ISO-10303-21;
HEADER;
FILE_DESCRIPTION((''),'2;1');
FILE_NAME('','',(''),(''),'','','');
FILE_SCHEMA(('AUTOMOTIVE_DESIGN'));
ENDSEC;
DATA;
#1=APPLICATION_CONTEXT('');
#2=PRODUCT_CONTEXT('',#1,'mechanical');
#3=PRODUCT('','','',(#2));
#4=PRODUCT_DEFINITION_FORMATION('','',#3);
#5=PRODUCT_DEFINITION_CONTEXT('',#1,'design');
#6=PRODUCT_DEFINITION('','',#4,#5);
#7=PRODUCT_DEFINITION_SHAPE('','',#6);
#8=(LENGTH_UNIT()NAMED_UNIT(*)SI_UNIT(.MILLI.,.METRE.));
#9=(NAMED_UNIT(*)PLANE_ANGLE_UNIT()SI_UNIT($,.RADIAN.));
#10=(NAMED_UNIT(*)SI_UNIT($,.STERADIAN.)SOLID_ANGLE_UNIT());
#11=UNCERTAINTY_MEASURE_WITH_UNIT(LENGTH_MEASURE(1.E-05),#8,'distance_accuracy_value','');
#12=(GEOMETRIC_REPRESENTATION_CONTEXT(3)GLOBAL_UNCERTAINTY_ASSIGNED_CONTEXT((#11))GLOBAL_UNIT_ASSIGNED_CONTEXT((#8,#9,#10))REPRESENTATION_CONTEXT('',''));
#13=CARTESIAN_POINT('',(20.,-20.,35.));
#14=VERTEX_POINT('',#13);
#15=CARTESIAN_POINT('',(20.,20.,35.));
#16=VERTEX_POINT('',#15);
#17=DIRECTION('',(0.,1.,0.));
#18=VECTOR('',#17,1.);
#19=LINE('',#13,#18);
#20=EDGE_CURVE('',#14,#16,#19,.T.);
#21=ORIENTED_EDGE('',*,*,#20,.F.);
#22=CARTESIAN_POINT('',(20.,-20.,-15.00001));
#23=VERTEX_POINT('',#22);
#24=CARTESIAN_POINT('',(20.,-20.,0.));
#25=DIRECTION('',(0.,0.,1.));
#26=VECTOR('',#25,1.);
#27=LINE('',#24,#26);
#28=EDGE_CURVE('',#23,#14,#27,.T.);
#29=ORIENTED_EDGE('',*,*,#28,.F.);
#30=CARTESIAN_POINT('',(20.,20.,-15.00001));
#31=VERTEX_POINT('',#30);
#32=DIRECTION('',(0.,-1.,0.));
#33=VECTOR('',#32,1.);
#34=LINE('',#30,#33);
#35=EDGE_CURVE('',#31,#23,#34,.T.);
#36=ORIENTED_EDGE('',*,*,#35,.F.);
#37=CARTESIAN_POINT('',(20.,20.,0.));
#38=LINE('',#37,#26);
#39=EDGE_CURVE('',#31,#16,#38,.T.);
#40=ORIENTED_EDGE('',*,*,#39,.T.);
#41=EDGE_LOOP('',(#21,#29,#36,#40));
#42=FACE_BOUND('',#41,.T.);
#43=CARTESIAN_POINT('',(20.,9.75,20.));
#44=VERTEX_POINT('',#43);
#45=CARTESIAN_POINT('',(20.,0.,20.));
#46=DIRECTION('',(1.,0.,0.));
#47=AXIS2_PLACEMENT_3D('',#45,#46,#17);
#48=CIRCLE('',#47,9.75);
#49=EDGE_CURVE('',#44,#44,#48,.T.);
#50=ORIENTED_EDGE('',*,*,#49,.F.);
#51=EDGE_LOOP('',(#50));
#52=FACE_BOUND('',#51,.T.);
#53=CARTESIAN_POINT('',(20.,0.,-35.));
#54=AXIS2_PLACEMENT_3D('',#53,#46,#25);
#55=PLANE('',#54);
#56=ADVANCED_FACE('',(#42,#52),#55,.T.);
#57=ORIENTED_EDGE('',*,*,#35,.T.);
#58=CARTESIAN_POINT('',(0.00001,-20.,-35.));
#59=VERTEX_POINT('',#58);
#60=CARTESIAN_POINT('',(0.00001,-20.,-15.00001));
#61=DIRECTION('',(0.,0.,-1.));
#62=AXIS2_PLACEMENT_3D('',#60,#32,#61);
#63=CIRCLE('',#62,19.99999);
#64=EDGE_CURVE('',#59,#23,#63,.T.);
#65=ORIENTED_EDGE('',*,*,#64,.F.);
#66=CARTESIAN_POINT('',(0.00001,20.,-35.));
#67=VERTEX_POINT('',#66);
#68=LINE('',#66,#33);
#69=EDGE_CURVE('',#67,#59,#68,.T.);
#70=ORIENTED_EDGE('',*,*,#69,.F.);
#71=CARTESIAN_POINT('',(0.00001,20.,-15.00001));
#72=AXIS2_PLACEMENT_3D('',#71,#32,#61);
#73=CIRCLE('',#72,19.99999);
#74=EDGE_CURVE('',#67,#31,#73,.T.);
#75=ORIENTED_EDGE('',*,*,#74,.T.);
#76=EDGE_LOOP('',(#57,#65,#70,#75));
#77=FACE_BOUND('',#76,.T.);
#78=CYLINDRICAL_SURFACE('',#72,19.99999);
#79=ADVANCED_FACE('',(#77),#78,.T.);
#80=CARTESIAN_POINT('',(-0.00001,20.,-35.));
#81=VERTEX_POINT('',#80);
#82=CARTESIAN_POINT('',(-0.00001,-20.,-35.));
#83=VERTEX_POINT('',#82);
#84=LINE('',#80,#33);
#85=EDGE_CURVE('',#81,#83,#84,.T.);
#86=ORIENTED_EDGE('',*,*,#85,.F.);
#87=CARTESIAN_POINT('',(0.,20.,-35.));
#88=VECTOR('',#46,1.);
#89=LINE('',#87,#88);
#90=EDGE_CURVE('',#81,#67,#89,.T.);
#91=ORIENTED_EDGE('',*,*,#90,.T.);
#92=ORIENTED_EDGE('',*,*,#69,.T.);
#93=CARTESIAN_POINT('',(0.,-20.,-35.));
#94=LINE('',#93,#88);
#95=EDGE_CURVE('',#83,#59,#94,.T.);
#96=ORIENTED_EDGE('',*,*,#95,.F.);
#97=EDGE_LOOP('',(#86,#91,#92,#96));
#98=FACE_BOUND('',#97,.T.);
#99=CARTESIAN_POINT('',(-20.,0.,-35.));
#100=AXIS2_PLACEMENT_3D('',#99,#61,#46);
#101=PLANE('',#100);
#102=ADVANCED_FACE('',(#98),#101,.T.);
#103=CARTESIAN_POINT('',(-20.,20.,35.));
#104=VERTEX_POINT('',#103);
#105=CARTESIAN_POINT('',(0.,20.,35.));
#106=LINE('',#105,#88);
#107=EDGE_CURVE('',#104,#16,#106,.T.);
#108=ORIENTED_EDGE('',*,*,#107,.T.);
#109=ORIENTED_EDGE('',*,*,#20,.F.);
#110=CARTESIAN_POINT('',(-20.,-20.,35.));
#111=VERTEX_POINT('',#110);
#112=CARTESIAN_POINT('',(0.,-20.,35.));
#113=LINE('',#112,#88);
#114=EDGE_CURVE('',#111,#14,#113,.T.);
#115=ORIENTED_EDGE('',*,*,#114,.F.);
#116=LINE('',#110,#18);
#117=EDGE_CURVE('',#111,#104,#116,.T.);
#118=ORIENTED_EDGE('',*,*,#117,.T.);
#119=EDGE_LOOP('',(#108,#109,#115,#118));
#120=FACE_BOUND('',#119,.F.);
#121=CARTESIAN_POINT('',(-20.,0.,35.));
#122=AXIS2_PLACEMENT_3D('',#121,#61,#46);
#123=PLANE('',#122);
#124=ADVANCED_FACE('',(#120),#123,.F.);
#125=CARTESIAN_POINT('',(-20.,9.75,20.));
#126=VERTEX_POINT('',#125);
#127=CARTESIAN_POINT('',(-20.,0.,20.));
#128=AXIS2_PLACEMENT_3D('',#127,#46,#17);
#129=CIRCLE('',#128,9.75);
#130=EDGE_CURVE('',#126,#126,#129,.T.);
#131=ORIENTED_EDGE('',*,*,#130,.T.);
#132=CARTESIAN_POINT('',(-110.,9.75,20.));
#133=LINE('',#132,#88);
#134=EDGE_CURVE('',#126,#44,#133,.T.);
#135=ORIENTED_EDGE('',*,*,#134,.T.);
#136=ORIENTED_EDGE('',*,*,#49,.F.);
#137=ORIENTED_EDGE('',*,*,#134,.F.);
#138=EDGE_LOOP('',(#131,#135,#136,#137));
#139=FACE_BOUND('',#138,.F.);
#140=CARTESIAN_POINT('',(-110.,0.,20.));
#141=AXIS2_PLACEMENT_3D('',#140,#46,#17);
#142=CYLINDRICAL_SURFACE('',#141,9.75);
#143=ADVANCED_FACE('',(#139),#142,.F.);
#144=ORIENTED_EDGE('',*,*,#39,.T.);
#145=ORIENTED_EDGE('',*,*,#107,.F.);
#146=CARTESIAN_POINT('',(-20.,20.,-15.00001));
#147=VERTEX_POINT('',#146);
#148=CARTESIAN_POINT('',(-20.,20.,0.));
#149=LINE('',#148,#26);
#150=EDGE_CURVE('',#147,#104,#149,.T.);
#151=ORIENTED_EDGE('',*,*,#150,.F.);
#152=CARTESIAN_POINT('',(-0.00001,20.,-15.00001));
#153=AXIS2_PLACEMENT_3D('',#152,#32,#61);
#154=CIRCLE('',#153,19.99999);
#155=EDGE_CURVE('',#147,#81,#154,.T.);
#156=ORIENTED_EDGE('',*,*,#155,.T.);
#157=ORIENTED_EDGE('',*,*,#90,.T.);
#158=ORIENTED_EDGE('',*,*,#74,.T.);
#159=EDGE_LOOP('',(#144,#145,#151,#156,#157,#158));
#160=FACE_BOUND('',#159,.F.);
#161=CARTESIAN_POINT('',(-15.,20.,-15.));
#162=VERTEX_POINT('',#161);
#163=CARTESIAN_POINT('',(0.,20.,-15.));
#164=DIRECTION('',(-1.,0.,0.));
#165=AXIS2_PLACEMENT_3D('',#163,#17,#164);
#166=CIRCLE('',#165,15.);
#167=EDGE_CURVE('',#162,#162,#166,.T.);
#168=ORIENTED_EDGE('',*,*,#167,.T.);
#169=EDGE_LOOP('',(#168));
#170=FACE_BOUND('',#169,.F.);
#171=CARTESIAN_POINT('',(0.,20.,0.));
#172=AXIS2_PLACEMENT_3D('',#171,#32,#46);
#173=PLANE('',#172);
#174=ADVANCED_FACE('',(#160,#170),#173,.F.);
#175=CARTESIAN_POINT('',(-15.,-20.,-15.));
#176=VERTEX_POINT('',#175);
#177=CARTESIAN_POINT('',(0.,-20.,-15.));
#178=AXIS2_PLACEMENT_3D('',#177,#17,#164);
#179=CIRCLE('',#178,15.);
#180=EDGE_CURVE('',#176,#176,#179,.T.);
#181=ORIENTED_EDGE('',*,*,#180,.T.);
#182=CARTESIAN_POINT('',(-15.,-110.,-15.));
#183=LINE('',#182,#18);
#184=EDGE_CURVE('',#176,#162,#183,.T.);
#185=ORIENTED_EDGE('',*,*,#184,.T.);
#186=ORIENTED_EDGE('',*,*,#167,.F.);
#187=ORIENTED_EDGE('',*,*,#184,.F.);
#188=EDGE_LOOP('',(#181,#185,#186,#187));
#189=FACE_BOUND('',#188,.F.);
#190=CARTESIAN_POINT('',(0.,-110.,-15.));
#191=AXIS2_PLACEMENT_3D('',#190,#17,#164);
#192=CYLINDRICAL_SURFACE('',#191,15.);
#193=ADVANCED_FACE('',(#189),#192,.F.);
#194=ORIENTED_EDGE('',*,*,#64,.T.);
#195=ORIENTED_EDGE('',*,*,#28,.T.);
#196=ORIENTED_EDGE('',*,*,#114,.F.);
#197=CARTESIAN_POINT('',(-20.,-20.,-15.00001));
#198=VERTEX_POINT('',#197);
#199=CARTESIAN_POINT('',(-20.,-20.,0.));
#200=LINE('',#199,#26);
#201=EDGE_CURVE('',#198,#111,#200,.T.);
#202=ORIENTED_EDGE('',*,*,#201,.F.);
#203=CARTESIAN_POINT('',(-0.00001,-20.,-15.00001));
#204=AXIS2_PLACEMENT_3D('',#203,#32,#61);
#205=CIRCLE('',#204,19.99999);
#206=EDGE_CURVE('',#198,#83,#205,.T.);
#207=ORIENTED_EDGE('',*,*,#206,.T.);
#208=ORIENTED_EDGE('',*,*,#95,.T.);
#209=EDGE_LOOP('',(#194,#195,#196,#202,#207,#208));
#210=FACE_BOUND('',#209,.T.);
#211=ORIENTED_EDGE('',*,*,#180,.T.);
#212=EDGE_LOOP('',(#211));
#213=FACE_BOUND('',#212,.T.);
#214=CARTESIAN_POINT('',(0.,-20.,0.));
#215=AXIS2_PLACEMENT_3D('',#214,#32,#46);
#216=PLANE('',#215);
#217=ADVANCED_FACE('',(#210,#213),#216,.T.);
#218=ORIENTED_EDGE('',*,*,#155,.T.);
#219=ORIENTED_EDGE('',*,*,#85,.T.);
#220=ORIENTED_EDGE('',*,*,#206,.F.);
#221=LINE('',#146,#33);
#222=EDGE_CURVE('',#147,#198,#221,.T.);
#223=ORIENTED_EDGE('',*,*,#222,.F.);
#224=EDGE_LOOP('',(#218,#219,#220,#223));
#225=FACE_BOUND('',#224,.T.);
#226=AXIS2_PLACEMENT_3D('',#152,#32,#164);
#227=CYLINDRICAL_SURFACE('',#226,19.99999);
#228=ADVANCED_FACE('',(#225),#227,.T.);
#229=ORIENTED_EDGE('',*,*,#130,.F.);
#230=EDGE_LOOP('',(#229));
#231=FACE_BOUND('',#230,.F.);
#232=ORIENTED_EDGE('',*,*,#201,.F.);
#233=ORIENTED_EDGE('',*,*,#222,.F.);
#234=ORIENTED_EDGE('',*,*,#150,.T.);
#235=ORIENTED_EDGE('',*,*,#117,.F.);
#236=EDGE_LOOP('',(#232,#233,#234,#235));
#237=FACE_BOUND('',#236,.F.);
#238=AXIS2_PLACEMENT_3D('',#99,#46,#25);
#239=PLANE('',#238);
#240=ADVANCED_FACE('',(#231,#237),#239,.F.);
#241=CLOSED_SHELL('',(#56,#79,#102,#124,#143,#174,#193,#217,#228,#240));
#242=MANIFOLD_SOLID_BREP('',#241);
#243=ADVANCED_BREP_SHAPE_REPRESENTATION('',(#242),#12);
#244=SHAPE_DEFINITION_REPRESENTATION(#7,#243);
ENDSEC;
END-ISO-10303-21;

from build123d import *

# Parameters (mm, degrees)
F0_W          = 40
F0_H          = 70
F1_DEPTH      = 20
F1_DEPTH_BACK = 20
F3_D          = 19.5
F5_D          = 30
F6_R          = 19.99999


# Not quite as in the source:
# - a fillet or chamfer is up to 0.001 mm smaller than in the source, because OpenCascade refuses the exact size


with BuildPart() as f1:
    # F0 (on Front) → F1 (new body, two sides)
    with BuildSketch(Plane.XZ) as f1_sk:
        Rectangle(F0_W, F0_H)
    extrude(amount=F1_DEPTH)
    extrude(f1_sk.sketch, amount=-F1_DEPTH_BACK)

    # F3 (through all)
    with Locations(Plane(origin=(-20, 0, 0), x_dir=(0, -1, 0), z_dir=(-1, 0, 0))):
        with Locations((0, 20)):
            Hole(F3_D / 2)

    # F5 (through all)
    with Locations(Plane.XZ.offset(20)):
        with Locations((0, -15)):
            Hole(F5_D / 2)

    # F6 (radius 20 in the source; OpenCascade refuses exactly that, so slightly less here)
    f6_edges = [f1.edges().sort_by_distance(p)[0] for p in [
        (20, 0, -35),
        (-20, 0, -35),
    ]]
    fillet(f6_edges, radius=F6_R)


solid = f1.part
